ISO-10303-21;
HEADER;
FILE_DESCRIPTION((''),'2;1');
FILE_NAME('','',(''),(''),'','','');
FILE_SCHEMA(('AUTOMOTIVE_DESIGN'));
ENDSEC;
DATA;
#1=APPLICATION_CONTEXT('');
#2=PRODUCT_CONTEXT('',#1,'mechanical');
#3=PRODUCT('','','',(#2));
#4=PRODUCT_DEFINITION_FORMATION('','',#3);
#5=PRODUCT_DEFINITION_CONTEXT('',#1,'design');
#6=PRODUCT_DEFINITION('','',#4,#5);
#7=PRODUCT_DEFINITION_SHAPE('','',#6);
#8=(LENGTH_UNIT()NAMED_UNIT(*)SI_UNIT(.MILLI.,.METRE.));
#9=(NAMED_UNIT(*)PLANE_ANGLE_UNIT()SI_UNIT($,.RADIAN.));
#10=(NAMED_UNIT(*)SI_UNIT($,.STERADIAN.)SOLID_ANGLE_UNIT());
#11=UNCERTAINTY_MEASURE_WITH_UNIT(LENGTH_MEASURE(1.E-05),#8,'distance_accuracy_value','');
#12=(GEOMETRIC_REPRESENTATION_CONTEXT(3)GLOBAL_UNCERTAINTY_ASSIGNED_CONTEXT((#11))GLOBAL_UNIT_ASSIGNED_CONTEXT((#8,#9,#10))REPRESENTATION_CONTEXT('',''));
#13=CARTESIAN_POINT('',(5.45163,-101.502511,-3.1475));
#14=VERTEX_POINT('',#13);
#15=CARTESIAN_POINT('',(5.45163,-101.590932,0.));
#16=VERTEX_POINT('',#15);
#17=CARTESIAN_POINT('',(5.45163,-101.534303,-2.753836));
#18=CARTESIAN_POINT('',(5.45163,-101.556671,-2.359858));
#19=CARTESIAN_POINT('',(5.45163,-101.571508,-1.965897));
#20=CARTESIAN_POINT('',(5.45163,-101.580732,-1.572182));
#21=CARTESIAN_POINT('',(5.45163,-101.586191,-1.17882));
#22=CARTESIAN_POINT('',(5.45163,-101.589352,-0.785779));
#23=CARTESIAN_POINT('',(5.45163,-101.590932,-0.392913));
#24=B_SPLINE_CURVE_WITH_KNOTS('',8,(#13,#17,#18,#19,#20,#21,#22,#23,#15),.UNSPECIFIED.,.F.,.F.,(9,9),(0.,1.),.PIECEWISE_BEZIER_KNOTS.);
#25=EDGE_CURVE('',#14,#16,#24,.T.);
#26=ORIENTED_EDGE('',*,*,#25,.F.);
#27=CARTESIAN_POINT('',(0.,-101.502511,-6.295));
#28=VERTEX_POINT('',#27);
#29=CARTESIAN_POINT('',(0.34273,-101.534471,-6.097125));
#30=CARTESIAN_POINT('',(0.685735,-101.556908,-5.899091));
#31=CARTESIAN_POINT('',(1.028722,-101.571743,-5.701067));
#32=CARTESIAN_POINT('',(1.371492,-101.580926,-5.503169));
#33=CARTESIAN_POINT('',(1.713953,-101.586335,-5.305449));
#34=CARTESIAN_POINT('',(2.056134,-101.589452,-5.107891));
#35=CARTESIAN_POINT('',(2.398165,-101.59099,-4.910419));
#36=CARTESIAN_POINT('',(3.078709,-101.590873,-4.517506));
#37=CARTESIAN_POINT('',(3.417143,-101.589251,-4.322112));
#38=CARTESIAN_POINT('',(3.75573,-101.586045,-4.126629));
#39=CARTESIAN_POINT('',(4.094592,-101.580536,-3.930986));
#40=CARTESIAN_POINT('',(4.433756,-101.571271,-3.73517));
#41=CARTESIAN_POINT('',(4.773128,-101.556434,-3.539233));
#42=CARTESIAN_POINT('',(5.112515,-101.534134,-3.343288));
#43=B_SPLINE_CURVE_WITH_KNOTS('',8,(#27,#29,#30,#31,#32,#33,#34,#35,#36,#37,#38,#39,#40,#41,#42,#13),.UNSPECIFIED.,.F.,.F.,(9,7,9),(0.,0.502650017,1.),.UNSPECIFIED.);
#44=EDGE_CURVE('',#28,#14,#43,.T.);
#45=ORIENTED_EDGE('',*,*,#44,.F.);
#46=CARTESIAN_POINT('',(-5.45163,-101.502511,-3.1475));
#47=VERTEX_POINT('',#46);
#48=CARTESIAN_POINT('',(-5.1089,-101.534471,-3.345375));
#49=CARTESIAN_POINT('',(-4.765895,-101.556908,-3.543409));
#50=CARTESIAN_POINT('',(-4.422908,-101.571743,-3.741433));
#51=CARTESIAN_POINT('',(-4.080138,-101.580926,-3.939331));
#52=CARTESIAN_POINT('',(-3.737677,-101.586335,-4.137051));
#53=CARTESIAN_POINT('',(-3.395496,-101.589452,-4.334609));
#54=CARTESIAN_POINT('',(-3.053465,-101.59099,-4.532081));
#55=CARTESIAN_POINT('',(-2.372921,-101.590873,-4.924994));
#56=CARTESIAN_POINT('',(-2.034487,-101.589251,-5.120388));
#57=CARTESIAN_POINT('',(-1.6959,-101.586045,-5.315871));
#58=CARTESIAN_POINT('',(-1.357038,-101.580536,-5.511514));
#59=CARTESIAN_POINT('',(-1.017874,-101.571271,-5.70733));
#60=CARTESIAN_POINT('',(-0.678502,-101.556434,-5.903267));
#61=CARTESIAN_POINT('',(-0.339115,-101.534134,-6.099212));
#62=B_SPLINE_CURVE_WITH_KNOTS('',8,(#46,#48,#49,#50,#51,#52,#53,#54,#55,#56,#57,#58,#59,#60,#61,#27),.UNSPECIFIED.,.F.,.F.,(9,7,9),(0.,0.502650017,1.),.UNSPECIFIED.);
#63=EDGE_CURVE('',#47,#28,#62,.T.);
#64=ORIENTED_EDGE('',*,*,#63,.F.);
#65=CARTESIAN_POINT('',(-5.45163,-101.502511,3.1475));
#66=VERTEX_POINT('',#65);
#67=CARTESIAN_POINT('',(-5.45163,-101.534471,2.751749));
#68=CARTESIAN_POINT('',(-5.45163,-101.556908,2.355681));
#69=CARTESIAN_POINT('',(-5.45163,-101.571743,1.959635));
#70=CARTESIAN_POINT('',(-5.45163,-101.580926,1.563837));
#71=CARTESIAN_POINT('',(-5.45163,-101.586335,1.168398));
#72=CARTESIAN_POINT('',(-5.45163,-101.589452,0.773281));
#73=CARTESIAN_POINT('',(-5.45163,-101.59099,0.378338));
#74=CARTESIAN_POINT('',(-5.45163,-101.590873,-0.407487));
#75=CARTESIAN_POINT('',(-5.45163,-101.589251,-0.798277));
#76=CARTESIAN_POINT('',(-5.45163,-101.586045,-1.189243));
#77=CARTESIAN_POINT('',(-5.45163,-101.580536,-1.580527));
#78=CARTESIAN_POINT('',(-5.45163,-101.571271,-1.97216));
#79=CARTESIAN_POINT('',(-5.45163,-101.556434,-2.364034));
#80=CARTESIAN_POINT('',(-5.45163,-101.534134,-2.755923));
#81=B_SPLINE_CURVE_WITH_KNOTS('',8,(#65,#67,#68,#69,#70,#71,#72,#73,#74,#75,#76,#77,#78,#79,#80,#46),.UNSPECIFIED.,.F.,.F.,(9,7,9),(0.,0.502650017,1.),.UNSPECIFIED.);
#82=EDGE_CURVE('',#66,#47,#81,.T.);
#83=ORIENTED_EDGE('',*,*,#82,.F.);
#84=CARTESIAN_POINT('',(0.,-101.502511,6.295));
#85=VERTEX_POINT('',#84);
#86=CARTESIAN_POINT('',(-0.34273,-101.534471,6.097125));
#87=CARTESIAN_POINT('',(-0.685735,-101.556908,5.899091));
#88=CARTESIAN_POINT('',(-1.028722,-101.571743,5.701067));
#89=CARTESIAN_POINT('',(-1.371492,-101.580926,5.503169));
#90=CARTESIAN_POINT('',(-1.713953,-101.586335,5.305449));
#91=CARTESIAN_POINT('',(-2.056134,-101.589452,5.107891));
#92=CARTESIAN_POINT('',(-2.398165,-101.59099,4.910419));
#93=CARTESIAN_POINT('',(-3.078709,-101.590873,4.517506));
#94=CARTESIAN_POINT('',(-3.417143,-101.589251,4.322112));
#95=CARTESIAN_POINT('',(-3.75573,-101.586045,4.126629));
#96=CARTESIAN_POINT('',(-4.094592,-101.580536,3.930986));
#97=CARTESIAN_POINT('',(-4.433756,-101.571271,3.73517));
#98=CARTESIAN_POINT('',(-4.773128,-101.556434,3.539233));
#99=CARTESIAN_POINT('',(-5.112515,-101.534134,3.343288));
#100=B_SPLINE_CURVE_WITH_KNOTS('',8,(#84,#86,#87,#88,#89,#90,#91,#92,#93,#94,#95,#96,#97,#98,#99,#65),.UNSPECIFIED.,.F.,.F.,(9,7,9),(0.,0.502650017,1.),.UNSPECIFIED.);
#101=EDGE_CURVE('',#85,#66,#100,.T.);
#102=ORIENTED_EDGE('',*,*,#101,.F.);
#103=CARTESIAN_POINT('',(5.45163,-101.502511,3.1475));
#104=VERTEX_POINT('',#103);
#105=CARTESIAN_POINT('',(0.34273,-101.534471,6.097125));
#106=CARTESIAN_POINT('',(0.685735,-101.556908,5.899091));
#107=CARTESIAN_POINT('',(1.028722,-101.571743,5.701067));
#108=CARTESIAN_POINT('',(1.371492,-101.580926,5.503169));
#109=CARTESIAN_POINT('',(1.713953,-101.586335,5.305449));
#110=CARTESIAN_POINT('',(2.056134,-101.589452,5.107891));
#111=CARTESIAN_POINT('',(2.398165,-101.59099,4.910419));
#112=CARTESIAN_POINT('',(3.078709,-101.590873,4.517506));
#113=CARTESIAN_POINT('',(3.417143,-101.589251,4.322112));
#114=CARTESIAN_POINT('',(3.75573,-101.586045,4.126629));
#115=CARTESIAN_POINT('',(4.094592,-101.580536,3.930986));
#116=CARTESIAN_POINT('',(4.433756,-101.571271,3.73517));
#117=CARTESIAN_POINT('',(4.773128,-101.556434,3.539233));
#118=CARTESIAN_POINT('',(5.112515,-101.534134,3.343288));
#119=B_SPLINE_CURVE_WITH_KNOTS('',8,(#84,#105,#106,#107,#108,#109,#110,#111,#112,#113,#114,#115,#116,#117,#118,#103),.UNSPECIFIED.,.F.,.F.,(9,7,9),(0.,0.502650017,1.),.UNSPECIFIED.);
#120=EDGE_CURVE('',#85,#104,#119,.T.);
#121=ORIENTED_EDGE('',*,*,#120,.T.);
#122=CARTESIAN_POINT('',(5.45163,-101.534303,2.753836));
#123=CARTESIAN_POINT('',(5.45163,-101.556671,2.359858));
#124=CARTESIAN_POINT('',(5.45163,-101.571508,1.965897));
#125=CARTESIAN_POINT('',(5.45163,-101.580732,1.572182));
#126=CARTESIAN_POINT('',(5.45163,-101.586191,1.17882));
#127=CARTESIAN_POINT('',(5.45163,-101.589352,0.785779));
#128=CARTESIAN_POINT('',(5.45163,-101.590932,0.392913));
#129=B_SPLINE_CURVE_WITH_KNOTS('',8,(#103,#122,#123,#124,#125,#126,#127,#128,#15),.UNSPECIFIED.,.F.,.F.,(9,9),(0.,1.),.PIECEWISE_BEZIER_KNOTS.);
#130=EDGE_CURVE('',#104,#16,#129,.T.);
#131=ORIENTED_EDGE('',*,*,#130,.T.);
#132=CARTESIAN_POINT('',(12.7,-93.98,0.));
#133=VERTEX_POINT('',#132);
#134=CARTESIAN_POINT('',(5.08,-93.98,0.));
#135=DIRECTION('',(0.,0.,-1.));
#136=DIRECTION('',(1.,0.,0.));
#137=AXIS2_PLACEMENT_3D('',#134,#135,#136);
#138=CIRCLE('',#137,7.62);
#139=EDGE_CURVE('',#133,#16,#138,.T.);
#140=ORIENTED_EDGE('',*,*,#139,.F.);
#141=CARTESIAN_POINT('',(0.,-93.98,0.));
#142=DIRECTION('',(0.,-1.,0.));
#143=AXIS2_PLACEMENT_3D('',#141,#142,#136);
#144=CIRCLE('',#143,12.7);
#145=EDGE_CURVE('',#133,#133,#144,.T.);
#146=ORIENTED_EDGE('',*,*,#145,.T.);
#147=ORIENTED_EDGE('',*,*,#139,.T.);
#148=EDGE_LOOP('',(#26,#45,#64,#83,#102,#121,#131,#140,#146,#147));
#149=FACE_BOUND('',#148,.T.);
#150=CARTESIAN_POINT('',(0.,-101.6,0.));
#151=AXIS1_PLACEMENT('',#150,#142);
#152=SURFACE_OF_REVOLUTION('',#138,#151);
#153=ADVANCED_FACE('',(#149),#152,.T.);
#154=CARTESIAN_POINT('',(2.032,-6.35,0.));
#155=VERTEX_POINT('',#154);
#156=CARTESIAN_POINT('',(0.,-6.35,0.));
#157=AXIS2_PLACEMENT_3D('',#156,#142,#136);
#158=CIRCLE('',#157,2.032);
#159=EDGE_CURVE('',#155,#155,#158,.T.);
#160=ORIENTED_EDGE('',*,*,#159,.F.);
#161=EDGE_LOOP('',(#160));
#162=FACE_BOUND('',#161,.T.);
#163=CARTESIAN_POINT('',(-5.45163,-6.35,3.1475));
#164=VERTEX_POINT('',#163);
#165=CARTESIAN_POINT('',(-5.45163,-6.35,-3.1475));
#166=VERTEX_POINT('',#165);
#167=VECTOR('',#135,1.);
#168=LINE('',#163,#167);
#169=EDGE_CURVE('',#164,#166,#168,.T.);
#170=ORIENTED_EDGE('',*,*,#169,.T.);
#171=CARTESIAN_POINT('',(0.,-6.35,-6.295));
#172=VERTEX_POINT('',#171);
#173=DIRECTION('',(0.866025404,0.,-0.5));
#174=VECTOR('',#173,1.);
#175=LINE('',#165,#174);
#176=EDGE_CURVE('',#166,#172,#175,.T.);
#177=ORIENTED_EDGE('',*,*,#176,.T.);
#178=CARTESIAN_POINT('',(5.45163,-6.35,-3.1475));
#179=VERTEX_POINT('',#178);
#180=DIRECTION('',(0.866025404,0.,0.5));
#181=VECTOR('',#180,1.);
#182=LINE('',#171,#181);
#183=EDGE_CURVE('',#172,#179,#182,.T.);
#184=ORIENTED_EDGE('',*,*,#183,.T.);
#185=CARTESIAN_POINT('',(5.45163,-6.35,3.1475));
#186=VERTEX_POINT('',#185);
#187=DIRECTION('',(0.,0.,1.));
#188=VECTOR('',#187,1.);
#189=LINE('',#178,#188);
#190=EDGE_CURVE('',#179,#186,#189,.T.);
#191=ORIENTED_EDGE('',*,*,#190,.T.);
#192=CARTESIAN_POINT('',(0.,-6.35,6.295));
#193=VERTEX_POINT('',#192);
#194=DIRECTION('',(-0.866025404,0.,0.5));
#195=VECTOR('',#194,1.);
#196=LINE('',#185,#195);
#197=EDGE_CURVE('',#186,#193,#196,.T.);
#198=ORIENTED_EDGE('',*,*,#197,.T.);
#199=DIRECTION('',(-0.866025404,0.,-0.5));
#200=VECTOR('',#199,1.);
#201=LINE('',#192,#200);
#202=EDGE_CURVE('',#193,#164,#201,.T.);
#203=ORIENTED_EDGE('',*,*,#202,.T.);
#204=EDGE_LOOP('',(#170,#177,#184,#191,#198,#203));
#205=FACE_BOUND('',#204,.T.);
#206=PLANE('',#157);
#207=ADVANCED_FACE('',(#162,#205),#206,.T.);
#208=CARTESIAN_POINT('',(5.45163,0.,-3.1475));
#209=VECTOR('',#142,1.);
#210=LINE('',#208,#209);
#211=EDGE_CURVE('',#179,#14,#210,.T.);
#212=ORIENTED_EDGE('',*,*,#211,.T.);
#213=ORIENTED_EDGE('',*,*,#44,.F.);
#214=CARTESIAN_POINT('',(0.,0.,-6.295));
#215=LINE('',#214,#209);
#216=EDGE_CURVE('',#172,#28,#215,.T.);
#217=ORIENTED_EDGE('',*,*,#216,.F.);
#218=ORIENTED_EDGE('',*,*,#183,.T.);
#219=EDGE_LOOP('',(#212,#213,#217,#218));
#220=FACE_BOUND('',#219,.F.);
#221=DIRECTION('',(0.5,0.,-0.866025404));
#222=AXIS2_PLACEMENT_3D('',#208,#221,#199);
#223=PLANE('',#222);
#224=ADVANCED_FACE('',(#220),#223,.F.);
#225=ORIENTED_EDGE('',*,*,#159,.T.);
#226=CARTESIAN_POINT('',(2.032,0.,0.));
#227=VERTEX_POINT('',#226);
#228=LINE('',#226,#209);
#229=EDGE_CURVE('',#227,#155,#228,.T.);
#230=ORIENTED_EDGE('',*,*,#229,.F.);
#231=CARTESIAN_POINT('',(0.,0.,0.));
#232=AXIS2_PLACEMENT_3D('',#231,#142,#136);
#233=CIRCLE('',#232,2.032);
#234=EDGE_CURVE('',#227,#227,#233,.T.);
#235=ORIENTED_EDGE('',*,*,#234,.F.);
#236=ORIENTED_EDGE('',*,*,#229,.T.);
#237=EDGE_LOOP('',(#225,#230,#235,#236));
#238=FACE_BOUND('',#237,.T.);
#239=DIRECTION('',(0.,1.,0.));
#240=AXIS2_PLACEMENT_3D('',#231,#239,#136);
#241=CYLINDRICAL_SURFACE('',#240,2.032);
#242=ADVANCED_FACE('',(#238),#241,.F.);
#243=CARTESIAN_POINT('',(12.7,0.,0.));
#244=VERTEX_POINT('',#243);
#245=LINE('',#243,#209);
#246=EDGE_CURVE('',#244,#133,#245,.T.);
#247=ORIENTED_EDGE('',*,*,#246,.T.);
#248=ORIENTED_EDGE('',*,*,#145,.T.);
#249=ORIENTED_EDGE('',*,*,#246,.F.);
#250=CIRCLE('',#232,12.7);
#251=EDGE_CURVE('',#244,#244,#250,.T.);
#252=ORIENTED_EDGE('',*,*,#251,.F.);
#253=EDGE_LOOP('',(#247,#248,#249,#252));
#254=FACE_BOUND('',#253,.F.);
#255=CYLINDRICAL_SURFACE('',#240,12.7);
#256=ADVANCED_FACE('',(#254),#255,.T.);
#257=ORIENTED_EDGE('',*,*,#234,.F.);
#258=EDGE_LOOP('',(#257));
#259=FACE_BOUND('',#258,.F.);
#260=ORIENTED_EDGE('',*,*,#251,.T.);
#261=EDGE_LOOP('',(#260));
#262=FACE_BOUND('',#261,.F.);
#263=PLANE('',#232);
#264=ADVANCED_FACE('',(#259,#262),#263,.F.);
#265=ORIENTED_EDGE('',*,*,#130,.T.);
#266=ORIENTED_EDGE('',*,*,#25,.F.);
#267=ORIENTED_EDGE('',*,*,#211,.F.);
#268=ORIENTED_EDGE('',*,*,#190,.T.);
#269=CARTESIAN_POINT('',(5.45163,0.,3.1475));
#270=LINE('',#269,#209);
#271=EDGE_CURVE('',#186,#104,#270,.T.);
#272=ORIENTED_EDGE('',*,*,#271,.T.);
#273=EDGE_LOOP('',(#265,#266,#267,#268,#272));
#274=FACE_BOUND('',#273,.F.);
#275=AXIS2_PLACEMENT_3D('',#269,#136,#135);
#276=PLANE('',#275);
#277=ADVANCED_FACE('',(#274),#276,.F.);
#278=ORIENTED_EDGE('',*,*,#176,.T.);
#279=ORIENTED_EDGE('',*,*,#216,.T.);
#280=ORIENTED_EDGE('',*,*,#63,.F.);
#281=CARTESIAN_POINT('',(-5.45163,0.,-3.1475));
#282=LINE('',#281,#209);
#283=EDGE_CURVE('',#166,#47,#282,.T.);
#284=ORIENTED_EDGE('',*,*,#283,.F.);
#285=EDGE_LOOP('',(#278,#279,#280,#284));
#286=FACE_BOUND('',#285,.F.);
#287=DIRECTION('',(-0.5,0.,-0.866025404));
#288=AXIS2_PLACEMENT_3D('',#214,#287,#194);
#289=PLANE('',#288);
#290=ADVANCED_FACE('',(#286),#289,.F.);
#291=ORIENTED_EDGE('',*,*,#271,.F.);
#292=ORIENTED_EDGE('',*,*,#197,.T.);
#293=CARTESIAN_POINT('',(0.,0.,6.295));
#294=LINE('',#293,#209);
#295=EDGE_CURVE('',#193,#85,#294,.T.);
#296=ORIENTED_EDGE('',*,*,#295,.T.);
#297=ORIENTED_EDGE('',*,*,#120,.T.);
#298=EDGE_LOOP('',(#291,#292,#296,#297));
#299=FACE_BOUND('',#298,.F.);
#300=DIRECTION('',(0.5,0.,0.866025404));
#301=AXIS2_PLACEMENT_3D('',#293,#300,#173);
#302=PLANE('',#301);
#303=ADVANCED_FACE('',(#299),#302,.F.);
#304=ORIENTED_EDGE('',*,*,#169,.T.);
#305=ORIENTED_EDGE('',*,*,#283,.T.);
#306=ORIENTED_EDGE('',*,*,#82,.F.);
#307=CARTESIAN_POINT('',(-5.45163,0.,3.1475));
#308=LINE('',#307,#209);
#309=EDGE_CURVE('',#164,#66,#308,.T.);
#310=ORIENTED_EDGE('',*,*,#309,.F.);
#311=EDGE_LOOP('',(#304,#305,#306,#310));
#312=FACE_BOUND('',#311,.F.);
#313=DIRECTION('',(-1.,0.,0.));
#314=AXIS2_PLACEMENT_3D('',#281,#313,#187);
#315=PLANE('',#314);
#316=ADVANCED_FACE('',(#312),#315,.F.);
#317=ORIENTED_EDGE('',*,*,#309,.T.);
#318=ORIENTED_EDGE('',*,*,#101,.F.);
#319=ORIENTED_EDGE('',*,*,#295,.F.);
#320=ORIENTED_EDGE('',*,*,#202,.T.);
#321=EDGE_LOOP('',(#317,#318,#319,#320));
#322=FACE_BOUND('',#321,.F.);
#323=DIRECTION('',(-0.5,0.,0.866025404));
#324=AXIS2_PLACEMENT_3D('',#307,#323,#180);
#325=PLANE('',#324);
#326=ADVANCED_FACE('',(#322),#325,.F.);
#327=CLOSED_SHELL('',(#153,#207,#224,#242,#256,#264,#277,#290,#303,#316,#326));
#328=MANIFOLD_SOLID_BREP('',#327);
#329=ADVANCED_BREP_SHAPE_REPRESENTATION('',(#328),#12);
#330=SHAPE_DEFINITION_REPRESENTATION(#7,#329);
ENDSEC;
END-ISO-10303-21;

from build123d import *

# Parameters (mm, degrees)
F0_R     = 2.032
F1_DEPTH = 6.35
F0_R_2   = 12.7
F2_DEPTH = 101.6


# Not quite as in the source:
# - a fillet or chamfer that OpenCascade refuses, or shapes differently, is made with other operations: its cross-section is extruded or revolved along the edge and cut away or added
# - the program builds the solid bodies; features that only make, move or delete a surface that nothing else refers to are left out


with BuildPart() as f1:
    # F0 (on Front) → F1 (new body)
    with BuildSketch(Plane.XZ):
        Polygon((-5.4516299168, -3.1475), (0, -6.295), (5.4516299168, -3.1475), (5.4516299168, 3.1475), (0, 6.295), (-5.4516299168, 3.1475), align=None)
        Circle(F0_R, mode=Mode.SUBTRACT)
    extrude(amount=F1_DEPTH)

    # F0 (on Front) → F2 (join)
    with BuildSketch(Plane.XZ):
        Circle(F0_R_2)
        Polygon((5.4516299168, -3.1475), (0, -6.295), (-5.4516299168, -3.1475), (-5.4516299168, 3.1475), (0, 6.295), (5.4516299168, 3.1475), align=None, mode=Mode.SUBTRACT)
    extrude(amount=F2_DEPTH)

    # F3: fillet of radius 7.62 on 1 edges, made by hand

    # F3_s1 → F3_t2 (revolve, cut)
    with BuildSketch(Plane.XY):
        with BuildLine():
            ThreePointArc((12.7, -93.98), (10.4681536726, -99.3681536726), (5.08, -101.6))
            Line((5.08, -101.6), (12.7, -101.6))
            Line((12.7, -101.6), (12.7, -93.98))
        make_face()
    revolve(axis=Axis((0, -101.6, 0), (0, -1, 0)), mode=Mode.SUBTRACT)


solid = f1.part
